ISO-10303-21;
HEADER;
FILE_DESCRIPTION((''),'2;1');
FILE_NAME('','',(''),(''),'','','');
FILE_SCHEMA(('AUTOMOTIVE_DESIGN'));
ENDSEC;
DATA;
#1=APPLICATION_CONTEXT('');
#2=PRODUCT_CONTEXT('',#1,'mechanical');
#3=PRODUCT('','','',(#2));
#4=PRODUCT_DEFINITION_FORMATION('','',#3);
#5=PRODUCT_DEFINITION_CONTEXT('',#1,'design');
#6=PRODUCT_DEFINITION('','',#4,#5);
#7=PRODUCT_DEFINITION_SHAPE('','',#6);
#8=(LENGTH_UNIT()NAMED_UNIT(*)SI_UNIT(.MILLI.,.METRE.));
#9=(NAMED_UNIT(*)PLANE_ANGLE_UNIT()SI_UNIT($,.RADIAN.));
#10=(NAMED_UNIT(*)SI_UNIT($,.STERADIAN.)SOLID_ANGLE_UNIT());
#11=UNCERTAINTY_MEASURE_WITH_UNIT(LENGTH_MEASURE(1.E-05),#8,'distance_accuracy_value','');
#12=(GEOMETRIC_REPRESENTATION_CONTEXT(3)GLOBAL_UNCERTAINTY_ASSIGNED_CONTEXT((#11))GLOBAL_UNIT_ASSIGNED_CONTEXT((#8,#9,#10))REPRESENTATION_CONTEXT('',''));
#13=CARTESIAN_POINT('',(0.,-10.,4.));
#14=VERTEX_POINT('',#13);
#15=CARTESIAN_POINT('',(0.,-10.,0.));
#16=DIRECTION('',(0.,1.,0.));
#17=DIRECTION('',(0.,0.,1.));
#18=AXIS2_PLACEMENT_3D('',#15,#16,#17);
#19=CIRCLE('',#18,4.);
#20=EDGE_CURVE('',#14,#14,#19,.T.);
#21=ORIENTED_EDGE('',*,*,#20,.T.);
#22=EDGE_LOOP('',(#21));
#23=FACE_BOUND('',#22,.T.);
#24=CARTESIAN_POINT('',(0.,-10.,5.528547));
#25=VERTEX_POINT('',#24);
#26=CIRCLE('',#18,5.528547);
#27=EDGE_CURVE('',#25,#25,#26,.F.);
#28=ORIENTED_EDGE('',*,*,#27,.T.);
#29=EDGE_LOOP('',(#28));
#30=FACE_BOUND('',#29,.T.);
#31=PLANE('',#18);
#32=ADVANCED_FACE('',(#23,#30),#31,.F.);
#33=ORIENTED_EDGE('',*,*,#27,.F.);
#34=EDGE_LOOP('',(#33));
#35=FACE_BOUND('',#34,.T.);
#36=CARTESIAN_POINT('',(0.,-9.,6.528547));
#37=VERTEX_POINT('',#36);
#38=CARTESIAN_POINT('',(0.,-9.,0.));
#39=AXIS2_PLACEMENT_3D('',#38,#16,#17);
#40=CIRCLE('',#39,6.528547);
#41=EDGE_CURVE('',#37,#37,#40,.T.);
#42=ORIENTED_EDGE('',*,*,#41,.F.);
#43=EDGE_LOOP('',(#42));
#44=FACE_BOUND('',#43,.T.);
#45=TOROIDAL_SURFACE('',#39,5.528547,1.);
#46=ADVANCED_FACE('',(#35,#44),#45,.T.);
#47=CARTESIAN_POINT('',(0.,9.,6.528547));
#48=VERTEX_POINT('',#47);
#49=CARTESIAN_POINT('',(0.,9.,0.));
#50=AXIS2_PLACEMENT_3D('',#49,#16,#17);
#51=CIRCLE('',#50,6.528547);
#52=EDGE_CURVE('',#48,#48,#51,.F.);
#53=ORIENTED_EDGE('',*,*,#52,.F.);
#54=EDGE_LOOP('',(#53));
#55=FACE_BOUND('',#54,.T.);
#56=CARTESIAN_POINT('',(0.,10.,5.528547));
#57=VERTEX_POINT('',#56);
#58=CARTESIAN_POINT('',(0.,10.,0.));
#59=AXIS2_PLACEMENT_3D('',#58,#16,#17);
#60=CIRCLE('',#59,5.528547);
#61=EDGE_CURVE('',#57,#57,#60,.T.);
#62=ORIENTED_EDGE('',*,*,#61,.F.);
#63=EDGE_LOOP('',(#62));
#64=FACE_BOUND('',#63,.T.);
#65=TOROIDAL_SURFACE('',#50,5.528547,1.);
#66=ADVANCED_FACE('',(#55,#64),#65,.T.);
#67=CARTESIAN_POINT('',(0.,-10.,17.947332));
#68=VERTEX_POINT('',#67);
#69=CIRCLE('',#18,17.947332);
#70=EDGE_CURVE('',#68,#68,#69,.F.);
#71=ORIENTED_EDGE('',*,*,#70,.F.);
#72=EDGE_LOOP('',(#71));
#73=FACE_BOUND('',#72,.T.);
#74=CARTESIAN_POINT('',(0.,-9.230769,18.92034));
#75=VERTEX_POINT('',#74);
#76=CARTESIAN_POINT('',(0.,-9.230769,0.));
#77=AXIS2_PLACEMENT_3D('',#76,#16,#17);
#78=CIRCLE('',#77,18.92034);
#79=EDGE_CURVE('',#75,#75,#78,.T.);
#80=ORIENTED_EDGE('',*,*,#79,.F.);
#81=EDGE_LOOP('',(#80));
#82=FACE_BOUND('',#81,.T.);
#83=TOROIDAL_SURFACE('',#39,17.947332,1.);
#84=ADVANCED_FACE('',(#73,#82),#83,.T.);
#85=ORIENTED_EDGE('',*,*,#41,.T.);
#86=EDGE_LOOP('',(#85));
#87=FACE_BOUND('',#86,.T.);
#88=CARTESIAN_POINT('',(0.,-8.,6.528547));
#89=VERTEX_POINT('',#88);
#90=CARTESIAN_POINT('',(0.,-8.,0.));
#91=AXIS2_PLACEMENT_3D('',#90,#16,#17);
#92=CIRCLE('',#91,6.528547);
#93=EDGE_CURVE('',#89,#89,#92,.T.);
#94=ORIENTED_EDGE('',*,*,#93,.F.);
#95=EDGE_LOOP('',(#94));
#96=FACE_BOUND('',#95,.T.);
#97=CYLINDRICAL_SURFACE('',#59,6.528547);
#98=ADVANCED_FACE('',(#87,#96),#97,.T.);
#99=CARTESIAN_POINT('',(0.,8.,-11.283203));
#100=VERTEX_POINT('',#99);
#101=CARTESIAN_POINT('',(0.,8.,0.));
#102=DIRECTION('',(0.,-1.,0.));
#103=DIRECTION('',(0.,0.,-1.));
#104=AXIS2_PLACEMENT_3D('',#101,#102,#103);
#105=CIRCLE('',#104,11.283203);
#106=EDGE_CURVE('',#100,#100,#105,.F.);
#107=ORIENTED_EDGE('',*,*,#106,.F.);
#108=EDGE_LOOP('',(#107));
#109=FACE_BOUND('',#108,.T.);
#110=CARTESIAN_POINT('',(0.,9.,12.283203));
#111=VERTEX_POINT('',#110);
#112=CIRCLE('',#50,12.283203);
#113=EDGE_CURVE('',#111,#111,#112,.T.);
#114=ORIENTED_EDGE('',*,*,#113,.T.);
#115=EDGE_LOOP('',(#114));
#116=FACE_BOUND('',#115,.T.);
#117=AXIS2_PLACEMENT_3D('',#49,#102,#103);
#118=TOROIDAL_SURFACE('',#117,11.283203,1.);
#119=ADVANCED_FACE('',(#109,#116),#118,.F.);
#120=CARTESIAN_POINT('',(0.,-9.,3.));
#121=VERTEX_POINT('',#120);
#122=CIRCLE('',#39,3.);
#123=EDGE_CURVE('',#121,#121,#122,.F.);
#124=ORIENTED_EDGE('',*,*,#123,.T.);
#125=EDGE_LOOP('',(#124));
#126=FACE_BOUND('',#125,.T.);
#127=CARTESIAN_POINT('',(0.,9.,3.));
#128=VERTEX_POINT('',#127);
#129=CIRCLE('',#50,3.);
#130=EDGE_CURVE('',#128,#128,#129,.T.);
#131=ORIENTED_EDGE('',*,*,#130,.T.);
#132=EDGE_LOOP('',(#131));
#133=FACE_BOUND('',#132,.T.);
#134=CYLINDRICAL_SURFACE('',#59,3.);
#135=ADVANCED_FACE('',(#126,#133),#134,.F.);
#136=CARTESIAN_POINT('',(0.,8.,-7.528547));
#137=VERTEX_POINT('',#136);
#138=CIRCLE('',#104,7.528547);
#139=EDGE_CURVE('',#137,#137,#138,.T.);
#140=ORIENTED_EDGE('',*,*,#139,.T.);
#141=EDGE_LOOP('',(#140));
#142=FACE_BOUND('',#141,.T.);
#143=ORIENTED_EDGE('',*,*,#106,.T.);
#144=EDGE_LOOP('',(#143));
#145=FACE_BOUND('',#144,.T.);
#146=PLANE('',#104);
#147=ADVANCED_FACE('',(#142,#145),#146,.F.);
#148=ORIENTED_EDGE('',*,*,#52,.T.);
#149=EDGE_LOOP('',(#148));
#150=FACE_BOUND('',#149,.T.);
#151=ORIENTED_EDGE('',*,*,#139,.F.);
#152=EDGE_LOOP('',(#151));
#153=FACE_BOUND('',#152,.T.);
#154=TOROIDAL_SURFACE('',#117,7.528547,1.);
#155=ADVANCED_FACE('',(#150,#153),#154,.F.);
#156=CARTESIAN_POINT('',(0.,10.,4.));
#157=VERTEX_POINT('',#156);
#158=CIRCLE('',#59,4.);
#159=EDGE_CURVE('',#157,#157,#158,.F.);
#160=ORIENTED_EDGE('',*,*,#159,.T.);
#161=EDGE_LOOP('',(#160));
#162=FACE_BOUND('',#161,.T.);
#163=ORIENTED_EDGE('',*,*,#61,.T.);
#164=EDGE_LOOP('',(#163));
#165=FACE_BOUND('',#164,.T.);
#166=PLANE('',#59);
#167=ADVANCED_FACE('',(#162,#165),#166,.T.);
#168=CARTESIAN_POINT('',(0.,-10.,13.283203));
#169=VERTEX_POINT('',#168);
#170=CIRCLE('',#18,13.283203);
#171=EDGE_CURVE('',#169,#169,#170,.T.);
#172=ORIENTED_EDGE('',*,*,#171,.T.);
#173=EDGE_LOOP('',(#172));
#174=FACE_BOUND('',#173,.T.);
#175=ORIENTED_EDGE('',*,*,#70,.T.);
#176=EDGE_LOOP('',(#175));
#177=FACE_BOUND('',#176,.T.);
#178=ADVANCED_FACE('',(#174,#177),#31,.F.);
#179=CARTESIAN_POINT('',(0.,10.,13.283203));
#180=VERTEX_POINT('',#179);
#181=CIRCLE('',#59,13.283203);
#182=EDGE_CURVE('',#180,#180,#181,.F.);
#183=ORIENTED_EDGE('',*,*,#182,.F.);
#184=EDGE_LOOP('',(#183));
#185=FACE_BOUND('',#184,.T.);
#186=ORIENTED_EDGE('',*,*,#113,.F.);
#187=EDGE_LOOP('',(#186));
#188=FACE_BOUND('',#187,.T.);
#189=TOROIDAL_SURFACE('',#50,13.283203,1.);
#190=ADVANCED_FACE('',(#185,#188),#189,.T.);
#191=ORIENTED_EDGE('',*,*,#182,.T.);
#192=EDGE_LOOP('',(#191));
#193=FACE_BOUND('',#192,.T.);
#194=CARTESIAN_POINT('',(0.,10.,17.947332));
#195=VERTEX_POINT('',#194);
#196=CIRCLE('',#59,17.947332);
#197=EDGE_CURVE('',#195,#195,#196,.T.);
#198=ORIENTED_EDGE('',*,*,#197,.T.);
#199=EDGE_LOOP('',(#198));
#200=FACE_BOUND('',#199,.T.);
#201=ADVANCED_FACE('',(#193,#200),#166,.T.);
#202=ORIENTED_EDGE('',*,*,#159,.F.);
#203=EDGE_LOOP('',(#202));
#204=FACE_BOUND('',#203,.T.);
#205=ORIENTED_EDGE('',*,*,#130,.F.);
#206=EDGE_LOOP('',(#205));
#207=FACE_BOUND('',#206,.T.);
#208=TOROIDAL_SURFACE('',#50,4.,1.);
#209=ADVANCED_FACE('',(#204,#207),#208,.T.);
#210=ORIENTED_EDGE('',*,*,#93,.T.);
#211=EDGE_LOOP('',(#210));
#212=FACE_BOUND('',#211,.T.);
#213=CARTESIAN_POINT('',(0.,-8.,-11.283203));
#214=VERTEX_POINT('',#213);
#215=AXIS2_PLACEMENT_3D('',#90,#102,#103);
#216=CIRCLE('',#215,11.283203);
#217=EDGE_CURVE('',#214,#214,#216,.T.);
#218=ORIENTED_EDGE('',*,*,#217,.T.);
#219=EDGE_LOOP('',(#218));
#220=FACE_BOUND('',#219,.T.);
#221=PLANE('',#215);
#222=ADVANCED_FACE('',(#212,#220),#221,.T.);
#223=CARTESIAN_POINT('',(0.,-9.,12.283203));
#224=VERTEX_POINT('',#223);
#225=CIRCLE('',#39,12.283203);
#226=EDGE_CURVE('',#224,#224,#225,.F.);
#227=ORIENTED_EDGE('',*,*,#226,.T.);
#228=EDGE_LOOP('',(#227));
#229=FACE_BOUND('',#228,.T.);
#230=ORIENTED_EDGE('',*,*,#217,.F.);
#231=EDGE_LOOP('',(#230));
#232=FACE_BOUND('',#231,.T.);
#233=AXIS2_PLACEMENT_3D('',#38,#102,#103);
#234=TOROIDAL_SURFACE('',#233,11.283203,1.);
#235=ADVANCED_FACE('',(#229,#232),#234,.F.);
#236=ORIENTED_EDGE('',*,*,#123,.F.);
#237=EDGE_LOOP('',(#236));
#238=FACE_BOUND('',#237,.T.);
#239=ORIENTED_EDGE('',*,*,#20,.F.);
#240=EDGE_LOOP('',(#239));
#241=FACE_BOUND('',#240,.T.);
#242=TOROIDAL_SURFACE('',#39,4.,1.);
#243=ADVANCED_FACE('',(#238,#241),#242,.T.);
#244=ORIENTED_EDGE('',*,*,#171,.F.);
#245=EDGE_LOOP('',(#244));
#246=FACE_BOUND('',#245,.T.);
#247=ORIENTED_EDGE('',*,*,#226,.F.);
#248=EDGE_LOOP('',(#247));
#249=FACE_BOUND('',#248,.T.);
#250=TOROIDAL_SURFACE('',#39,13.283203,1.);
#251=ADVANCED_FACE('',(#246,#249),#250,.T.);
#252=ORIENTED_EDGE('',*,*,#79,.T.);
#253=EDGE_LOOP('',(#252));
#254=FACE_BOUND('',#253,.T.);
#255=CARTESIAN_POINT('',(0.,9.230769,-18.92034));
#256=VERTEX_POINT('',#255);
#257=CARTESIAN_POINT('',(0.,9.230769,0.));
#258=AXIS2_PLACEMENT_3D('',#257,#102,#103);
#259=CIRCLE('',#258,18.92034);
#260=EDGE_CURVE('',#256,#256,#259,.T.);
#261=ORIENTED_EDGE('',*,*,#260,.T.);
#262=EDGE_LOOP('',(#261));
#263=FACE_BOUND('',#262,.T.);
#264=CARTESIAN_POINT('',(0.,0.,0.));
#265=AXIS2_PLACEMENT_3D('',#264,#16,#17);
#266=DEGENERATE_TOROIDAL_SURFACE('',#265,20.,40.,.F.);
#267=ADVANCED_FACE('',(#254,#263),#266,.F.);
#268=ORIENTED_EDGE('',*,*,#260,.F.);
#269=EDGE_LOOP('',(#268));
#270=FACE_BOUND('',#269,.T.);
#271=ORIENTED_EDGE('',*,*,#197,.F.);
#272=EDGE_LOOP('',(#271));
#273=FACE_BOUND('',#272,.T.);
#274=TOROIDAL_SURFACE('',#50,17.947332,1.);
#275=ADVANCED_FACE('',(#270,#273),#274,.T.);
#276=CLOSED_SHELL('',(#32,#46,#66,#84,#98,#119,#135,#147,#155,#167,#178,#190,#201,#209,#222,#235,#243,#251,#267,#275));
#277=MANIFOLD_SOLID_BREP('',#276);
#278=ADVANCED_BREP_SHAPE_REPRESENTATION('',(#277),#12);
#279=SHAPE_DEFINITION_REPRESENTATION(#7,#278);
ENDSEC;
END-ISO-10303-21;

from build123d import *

# Parameters (mm, degrees)
FILLET_1_R = 1


with BuildPart() as part:
    # 草图1 → 旋转1 (revolve)
    with BuildSketch(Plane.XY, mode=Mode.PRIVATE) as revolve_1_sk:
        with BuildLine():
            Line((-12.283202798, 10), (-18.729833462, 10))
            ThreePointArc((-18.729833462, 10), (-20, 0), (-18.729833462, -10))
            Line((-18.729833462, -10), (-12.283202798, -10))
            Line((-12.283202798, -10), (-12.283202798, -8))
            Line((-12.283202798, -8), (-6.528547037, -8))
            Line((-6.528547037, -8), (-6.528547037, -10))
            Line((-6.528547037, -10), (-3, -10))
            Line((-3, -10), (-3, 10))
            Line((-3, 10), (-6.528547037, 10))
            Line((-6.528547037, 10), (-6.528547037, 8))
            Line((-6.528547037, 8), (-12.283202798, 8))
            Line((-12.283202798, 8), (-12.283202798, 10))
        make_face()
    revolve(revolve_1_sk.sketch.rotate(Axis((0, 10, 0), (0, -1, 0)), 270), axis=Axis((0, 10, 0), (0, -1, 0)))

    # 圆角1
    fillet_1_edges = [part.edges().sort_by_distance(p)[0] for p in [
        (0, 8, -12.283202798),
        (0, 8, -6.528547037),
        (0, 10, -6.528547037),
        (0, 10, -3),
        (0, -10, -3),
        (0, -10, -6.528547037),
        (0, -8, -12.283202798),
        (0, -10, -12.283202798),
        (0, -10, -18.729833462),
        (0, 10, -18.729833462),
        (0, 10, -12.283202798),
    ]]
    fillet(fillet_1_edges, radius=FILLET_1_R - 0.0001)  # a hair under: the kernel refuses the full size


solid = part.part
